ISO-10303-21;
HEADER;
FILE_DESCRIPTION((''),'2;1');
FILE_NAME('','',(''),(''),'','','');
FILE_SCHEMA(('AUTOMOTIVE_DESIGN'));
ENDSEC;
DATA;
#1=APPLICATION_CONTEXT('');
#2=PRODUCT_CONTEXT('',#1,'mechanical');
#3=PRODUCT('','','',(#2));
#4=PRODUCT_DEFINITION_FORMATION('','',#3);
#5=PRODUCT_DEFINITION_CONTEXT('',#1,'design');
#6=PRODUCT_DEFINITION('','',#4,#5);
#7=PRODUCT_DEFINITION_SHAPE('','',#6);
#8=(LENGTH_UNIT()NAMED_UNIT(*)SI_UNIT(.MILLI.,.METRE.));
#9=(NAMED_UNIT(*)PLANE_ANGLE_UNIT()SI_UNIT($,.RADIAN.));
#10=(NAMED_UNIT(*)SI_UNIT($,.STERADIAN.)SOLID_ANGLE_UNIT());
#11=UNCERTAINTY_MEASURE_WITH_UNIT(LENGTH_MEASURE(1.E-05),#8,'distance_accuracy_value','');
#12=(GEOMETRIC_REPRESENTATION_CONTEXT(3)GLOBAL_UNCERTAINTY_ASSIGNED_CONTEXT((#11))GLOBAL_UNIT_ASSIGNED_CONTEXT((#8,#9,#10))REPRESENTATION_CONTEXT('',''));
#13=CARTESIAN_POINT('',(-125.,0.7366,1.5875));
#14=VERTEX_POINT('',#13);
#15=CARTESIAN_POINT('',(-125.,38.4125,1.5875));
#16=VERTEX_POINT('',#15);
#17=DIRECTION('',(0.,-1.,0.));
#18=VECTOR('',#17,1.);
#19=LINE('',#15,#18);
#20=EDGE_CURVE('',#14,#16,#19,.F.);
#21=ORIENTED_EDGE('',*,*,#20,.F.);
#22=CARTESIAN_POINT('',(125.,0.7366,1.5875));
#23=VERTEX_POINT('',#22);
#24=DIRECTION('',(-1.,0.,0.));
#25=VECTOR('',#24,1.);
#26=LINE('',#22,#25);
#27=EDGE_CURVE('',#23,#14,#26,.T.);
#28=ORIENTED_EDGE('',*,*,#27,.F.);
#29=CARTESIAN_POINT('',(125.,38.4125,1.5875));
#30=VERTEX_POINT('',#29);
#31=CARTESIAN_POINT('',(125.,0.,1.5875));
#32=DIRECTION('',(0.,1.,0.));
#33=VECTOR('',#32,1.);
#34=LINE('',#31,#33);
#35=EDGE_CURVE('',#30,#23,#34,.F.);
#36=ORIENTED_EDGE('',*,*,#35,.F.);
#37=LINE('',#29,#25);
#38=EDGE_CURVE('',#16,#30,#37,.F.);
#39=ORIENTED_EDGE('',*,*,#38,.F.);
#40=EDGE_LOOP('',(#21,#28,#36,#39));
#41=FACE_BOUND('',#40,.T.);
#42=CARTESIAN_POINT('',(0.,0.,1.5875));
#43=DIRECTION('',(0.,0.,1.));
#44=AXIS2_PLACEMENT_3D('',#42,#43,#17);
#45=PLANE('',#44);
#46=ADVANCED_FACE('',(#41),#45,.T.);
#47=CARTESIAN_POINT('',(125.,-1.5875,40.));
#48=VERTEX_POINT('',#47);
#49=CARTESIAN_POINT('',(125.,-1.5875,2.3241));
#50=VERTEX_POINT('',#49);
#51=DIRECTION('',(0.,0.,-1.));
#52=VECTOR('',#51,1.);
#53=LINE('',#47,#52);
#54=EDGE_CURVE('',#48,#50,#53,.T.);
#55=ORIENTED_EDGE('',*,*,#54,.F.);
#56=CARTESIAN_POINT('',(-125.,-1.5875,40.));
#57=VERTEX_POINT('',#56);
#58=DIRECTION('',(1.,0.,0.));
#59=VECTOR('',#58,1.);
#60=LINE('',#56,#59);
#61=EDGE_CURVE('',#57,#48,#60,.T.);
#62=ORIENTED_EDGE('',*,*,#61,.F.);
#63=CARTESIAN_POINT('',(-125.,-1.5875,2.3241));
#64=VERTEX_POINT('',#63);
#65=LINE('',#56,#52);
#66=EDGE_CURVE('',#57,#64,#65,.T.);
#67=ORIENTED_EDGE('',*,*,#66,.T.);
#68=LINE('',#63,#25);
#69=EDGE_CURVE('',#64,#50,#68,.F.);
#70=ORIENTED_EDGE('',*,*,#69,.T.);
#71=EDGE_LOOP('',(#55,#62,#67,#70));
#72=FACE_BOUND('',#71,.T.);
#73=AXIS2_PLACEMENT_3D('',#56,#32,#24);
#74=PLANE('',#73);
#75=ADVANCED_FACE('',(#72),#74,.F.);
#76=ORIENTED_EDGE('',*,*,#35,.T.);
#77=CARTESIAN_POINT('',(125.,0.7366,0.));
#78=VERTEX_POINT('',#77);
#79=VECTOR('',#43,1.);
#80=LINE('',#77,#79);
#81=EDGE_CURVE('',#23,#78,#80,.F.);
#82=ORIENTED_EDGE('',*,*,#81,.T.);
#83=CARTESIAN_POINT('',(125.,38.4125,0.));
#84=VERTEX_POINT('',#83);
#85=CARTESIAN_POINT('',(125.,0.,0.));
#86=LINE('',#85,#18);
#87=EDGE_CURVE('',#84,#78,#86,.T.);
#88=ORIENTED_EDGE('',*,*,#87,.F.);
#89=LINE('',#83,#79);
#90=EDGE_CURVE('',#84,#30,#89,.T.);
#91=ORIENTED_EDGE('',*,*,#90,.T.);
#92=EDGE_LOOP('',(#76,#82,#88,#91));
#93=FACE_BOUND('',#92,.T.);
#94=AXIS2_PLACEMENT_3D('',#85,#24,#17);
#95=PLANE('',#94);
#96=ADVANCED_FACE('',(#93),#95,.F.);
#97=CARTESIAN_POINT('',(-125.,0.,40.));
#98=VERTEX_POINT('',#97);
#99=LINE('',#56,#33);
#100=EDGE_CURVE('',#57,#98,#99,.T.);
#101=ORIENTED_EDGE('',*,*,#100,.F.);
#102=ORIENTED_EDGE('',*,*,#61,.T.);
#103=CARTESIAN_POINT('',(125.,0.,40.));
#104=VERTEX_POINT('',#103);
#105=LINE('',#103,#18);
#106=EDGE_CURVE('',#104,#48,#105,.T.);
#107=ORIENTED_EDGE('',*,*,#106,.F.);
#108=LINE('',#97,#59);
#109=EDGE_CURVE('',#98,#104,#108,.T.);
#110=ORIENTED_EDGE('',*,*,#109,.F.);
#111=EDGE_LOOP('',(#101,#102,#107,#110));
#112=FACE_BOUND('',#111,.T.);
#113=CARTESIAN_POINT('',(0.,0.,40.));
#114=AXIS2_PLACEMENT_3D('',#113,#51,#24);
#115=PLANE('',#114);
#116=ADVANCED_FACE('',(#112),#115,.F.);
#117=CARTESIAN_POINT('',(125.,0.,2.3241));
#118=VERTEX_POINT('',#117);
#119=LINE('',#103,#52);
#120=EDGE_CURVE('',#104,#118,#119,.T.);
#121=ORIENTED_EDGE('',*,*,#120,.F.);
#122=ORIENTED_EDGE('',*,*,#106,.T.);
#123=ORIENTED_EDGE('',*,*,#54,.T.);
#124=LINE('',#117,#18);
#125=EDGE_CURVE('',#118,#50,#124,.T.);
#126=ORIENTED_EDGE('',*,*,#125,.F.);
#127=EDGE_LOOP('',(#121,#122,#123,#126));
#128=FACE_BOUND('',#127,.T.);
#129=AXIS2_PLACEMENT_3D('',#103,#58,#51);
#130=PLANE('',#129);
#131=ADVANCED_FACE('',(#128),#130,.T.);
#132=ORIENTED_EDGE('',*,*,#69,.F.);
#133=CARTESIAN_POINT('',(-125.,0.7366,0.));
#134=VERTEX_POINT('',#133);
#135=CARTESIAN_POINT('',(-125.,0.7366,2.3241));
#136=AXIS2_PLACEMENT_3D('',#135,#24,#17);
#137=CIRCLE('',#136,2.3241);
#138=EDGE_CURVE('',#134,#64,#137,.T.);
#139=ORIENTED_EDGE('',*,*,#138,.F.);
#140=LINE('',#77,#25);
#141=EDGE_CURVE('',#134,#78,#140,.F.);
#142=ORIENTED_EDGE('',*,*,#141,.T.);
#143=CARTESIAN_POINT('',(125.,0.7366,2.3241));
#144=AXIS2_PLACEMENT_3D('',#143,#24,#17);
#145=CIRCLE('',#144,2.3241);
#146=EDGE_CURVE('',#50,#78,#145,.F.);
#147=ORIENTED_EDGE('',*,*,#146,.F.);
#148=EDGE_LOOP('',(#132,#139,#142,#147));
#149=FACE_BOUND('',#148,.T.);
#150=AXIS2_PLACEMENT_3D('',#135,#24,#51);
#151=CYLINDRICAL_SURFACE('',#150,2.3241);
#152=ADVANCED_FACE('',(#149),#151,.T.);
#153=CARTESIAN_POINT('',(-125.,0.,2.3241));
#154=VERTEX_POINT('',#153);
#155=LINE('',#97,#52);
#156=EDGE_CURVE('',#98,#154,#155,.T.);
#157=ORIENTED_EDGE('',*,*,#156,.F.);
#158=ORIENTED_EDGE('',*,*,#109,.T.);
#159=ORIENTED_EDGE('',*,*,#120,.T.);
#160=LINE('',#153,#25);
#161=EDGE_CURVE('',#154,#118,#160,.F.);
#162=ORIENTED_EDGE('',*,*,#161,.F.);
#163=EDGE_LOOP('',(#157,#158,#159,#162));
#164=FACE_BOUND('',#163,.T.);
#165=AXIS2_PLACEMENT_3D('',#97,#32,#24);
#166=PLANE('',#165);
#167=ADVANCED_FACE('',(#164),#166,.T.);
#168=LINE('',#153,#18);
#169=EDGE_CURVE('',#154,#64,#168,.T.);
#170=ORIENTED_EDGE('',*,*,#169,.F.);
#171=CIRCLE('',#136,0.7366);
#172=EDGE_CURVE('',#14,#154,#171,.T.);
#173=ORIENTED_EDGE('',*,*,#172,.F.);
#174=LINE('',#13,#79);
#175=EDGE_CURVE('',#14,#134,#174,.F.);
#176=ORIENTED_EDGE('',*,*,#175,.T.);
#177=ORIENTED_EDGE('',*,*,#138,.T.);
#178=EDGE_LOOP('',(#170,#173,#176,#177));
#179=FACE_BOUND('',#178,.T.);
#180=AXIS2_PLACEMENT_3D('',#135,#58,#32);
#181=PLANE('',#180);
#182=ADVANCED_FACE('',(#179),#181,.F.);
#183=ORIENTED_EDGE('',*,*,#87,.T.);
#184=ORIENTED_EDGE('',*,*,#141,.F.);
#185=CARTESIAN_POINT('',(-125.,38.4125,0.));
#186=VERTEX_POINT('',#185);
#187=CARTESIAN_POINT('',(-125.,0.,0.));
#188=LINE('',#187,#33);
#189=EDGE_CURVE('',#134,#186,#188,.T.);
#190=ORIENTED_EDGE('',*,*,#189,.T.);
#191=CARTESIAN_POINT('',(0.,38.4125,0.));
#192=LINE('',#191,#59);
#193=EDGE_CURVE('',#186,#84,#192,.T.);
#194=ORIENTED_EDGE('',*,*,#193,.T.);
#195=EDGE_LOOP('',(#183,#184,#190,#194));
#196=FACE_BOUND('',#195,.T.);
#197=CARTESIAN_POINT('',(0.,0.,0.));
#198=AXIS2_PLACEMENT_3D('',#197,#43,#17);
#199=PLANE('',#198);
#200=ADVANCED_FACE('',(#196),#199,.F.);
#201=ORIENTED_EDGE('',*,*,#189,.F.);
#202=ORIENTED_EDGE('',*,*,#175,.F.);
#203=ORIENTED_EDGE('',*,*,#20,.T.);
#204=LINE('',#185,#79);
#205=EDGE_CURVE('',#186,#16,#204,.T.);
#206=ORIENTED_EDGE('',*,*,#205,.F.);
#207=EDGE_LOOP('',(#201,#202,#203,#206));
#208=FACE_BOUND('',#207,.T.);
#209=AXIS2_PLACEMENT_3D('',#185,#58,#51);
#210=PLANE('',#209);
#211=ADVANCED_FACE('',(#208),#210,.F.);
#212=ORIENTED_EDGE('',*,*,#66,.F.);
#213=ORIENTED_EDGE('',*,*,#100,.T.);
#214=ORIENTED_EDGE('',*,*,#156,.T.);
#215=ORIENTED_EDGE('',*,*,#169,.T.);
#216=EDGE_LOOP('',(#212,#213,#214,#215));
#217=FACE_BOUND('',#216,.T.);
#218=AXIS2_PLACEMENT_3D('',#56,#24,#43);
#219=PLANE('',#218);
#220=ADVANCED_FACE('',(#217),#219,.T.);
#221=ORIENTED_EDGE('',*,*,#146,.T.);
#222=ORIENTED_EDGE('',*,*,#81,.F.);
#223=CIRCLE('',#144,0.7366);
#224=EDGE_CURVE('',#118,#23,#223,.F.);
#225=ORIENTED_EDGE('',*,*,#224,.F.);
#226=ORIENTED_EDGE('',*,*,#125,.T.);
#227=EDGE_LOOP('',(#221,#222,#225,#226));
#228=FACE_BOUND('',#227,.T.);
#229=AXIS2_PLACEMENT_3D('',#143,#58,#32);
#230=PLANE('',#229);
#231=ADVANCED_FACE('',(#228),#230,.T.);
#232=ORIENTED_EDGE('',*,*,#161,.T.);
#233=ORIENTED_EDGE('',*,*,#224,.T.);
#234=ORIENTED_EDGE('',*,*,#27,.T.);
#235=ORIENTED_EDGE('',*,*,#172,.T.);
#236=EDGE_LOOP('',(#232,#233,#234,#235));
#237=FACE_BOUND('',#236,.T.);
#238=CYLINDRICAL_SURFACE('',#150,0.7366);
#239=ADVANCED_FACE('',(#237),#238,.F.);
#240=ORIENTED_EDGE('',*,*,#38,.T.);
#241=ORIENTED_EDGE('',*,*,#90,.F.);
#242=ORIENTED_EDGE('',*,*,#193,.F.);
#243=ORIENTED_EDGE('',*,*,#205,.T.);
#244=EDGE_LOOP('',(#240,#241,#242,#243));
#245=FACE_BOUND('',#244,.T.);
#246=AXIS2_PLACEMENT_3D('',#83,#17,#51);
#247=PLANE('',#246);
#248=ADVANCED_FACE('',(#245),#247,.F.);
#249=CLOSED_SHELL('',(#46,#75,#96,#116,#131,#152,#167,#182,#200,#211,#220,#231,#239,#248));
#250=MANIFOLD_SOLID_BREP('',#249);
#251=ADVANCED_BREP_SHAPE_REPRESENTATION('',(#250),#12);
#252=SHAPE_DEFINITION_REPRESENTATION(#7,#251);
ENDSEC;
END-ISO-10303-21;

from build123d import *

# Parameters (mm, degrees)
SKETCH1_W                    = 250
SKETCH1_H                    = 1.5875
BASE_FLANGE1_DEPTH           = 40
EDGE_FLANGE1_STRIP_W         = 7.8232
EDGE_FLANGE1_STRIP_H         = 1.5875
EDGE_FLANGE1_STRIP_CUT_DEPTH = 250
EDGE_FLANGE1_DEPTH           = 250


# Sheet-metal steps are written as plain solids
with BuildPart() as part:
    # Sketch1 → Base-Flange1 (new body)
    with BuildSketch(Plane.XY):
        with Locations((0, -0.79375)):
            Rectangle(SKETCH1_W, SKETCH1_H)
    extrude(amount=BASE_FLANGE1_DEPTH)

    # Edge-Flange1 strip (across the edge) → Edge-Flange1 strip cut (cut)
    with BuildSketch(Plane.ZY.offset(-125)):
        with Locations((-1.5875, -0.79375)):
            Rectangle(EDGE_FLANGE1_STRIP_W, EDGE_FLANGE1_STRIP_H)
    extrude(amount=EDGE_FLANGE1_STRIP_CUT_DEPTH, mode=Mode.SUBTRACT)

    # Edge-Flange1 section (across the edge) → Edge-Flange1 (add)
    with BuildSketch(Plane.ZY.offset(-125)):
        with BuildLine():
            Line((0, 0.7366), (0, 38.4125))
            Line((0, 38.4125), (1.5875, 38.4125))
            Line((1.5875, 38.4125), (1.5875, 0.7366))
            ThreePointArc((1.5875, 0.7366), (1.803245145, 0.215745145), (2.3241, 0))
            Line((2.3241, 0), (2.3241, -1.5875))
            ThreePointArc((2.3241, -1.5875), (0.68071313, -0.90678687), (0, 0.7366))
        make_face()
    extrude(amount=EDGE_FLANGE1_DEPTH)


solid = part.part
